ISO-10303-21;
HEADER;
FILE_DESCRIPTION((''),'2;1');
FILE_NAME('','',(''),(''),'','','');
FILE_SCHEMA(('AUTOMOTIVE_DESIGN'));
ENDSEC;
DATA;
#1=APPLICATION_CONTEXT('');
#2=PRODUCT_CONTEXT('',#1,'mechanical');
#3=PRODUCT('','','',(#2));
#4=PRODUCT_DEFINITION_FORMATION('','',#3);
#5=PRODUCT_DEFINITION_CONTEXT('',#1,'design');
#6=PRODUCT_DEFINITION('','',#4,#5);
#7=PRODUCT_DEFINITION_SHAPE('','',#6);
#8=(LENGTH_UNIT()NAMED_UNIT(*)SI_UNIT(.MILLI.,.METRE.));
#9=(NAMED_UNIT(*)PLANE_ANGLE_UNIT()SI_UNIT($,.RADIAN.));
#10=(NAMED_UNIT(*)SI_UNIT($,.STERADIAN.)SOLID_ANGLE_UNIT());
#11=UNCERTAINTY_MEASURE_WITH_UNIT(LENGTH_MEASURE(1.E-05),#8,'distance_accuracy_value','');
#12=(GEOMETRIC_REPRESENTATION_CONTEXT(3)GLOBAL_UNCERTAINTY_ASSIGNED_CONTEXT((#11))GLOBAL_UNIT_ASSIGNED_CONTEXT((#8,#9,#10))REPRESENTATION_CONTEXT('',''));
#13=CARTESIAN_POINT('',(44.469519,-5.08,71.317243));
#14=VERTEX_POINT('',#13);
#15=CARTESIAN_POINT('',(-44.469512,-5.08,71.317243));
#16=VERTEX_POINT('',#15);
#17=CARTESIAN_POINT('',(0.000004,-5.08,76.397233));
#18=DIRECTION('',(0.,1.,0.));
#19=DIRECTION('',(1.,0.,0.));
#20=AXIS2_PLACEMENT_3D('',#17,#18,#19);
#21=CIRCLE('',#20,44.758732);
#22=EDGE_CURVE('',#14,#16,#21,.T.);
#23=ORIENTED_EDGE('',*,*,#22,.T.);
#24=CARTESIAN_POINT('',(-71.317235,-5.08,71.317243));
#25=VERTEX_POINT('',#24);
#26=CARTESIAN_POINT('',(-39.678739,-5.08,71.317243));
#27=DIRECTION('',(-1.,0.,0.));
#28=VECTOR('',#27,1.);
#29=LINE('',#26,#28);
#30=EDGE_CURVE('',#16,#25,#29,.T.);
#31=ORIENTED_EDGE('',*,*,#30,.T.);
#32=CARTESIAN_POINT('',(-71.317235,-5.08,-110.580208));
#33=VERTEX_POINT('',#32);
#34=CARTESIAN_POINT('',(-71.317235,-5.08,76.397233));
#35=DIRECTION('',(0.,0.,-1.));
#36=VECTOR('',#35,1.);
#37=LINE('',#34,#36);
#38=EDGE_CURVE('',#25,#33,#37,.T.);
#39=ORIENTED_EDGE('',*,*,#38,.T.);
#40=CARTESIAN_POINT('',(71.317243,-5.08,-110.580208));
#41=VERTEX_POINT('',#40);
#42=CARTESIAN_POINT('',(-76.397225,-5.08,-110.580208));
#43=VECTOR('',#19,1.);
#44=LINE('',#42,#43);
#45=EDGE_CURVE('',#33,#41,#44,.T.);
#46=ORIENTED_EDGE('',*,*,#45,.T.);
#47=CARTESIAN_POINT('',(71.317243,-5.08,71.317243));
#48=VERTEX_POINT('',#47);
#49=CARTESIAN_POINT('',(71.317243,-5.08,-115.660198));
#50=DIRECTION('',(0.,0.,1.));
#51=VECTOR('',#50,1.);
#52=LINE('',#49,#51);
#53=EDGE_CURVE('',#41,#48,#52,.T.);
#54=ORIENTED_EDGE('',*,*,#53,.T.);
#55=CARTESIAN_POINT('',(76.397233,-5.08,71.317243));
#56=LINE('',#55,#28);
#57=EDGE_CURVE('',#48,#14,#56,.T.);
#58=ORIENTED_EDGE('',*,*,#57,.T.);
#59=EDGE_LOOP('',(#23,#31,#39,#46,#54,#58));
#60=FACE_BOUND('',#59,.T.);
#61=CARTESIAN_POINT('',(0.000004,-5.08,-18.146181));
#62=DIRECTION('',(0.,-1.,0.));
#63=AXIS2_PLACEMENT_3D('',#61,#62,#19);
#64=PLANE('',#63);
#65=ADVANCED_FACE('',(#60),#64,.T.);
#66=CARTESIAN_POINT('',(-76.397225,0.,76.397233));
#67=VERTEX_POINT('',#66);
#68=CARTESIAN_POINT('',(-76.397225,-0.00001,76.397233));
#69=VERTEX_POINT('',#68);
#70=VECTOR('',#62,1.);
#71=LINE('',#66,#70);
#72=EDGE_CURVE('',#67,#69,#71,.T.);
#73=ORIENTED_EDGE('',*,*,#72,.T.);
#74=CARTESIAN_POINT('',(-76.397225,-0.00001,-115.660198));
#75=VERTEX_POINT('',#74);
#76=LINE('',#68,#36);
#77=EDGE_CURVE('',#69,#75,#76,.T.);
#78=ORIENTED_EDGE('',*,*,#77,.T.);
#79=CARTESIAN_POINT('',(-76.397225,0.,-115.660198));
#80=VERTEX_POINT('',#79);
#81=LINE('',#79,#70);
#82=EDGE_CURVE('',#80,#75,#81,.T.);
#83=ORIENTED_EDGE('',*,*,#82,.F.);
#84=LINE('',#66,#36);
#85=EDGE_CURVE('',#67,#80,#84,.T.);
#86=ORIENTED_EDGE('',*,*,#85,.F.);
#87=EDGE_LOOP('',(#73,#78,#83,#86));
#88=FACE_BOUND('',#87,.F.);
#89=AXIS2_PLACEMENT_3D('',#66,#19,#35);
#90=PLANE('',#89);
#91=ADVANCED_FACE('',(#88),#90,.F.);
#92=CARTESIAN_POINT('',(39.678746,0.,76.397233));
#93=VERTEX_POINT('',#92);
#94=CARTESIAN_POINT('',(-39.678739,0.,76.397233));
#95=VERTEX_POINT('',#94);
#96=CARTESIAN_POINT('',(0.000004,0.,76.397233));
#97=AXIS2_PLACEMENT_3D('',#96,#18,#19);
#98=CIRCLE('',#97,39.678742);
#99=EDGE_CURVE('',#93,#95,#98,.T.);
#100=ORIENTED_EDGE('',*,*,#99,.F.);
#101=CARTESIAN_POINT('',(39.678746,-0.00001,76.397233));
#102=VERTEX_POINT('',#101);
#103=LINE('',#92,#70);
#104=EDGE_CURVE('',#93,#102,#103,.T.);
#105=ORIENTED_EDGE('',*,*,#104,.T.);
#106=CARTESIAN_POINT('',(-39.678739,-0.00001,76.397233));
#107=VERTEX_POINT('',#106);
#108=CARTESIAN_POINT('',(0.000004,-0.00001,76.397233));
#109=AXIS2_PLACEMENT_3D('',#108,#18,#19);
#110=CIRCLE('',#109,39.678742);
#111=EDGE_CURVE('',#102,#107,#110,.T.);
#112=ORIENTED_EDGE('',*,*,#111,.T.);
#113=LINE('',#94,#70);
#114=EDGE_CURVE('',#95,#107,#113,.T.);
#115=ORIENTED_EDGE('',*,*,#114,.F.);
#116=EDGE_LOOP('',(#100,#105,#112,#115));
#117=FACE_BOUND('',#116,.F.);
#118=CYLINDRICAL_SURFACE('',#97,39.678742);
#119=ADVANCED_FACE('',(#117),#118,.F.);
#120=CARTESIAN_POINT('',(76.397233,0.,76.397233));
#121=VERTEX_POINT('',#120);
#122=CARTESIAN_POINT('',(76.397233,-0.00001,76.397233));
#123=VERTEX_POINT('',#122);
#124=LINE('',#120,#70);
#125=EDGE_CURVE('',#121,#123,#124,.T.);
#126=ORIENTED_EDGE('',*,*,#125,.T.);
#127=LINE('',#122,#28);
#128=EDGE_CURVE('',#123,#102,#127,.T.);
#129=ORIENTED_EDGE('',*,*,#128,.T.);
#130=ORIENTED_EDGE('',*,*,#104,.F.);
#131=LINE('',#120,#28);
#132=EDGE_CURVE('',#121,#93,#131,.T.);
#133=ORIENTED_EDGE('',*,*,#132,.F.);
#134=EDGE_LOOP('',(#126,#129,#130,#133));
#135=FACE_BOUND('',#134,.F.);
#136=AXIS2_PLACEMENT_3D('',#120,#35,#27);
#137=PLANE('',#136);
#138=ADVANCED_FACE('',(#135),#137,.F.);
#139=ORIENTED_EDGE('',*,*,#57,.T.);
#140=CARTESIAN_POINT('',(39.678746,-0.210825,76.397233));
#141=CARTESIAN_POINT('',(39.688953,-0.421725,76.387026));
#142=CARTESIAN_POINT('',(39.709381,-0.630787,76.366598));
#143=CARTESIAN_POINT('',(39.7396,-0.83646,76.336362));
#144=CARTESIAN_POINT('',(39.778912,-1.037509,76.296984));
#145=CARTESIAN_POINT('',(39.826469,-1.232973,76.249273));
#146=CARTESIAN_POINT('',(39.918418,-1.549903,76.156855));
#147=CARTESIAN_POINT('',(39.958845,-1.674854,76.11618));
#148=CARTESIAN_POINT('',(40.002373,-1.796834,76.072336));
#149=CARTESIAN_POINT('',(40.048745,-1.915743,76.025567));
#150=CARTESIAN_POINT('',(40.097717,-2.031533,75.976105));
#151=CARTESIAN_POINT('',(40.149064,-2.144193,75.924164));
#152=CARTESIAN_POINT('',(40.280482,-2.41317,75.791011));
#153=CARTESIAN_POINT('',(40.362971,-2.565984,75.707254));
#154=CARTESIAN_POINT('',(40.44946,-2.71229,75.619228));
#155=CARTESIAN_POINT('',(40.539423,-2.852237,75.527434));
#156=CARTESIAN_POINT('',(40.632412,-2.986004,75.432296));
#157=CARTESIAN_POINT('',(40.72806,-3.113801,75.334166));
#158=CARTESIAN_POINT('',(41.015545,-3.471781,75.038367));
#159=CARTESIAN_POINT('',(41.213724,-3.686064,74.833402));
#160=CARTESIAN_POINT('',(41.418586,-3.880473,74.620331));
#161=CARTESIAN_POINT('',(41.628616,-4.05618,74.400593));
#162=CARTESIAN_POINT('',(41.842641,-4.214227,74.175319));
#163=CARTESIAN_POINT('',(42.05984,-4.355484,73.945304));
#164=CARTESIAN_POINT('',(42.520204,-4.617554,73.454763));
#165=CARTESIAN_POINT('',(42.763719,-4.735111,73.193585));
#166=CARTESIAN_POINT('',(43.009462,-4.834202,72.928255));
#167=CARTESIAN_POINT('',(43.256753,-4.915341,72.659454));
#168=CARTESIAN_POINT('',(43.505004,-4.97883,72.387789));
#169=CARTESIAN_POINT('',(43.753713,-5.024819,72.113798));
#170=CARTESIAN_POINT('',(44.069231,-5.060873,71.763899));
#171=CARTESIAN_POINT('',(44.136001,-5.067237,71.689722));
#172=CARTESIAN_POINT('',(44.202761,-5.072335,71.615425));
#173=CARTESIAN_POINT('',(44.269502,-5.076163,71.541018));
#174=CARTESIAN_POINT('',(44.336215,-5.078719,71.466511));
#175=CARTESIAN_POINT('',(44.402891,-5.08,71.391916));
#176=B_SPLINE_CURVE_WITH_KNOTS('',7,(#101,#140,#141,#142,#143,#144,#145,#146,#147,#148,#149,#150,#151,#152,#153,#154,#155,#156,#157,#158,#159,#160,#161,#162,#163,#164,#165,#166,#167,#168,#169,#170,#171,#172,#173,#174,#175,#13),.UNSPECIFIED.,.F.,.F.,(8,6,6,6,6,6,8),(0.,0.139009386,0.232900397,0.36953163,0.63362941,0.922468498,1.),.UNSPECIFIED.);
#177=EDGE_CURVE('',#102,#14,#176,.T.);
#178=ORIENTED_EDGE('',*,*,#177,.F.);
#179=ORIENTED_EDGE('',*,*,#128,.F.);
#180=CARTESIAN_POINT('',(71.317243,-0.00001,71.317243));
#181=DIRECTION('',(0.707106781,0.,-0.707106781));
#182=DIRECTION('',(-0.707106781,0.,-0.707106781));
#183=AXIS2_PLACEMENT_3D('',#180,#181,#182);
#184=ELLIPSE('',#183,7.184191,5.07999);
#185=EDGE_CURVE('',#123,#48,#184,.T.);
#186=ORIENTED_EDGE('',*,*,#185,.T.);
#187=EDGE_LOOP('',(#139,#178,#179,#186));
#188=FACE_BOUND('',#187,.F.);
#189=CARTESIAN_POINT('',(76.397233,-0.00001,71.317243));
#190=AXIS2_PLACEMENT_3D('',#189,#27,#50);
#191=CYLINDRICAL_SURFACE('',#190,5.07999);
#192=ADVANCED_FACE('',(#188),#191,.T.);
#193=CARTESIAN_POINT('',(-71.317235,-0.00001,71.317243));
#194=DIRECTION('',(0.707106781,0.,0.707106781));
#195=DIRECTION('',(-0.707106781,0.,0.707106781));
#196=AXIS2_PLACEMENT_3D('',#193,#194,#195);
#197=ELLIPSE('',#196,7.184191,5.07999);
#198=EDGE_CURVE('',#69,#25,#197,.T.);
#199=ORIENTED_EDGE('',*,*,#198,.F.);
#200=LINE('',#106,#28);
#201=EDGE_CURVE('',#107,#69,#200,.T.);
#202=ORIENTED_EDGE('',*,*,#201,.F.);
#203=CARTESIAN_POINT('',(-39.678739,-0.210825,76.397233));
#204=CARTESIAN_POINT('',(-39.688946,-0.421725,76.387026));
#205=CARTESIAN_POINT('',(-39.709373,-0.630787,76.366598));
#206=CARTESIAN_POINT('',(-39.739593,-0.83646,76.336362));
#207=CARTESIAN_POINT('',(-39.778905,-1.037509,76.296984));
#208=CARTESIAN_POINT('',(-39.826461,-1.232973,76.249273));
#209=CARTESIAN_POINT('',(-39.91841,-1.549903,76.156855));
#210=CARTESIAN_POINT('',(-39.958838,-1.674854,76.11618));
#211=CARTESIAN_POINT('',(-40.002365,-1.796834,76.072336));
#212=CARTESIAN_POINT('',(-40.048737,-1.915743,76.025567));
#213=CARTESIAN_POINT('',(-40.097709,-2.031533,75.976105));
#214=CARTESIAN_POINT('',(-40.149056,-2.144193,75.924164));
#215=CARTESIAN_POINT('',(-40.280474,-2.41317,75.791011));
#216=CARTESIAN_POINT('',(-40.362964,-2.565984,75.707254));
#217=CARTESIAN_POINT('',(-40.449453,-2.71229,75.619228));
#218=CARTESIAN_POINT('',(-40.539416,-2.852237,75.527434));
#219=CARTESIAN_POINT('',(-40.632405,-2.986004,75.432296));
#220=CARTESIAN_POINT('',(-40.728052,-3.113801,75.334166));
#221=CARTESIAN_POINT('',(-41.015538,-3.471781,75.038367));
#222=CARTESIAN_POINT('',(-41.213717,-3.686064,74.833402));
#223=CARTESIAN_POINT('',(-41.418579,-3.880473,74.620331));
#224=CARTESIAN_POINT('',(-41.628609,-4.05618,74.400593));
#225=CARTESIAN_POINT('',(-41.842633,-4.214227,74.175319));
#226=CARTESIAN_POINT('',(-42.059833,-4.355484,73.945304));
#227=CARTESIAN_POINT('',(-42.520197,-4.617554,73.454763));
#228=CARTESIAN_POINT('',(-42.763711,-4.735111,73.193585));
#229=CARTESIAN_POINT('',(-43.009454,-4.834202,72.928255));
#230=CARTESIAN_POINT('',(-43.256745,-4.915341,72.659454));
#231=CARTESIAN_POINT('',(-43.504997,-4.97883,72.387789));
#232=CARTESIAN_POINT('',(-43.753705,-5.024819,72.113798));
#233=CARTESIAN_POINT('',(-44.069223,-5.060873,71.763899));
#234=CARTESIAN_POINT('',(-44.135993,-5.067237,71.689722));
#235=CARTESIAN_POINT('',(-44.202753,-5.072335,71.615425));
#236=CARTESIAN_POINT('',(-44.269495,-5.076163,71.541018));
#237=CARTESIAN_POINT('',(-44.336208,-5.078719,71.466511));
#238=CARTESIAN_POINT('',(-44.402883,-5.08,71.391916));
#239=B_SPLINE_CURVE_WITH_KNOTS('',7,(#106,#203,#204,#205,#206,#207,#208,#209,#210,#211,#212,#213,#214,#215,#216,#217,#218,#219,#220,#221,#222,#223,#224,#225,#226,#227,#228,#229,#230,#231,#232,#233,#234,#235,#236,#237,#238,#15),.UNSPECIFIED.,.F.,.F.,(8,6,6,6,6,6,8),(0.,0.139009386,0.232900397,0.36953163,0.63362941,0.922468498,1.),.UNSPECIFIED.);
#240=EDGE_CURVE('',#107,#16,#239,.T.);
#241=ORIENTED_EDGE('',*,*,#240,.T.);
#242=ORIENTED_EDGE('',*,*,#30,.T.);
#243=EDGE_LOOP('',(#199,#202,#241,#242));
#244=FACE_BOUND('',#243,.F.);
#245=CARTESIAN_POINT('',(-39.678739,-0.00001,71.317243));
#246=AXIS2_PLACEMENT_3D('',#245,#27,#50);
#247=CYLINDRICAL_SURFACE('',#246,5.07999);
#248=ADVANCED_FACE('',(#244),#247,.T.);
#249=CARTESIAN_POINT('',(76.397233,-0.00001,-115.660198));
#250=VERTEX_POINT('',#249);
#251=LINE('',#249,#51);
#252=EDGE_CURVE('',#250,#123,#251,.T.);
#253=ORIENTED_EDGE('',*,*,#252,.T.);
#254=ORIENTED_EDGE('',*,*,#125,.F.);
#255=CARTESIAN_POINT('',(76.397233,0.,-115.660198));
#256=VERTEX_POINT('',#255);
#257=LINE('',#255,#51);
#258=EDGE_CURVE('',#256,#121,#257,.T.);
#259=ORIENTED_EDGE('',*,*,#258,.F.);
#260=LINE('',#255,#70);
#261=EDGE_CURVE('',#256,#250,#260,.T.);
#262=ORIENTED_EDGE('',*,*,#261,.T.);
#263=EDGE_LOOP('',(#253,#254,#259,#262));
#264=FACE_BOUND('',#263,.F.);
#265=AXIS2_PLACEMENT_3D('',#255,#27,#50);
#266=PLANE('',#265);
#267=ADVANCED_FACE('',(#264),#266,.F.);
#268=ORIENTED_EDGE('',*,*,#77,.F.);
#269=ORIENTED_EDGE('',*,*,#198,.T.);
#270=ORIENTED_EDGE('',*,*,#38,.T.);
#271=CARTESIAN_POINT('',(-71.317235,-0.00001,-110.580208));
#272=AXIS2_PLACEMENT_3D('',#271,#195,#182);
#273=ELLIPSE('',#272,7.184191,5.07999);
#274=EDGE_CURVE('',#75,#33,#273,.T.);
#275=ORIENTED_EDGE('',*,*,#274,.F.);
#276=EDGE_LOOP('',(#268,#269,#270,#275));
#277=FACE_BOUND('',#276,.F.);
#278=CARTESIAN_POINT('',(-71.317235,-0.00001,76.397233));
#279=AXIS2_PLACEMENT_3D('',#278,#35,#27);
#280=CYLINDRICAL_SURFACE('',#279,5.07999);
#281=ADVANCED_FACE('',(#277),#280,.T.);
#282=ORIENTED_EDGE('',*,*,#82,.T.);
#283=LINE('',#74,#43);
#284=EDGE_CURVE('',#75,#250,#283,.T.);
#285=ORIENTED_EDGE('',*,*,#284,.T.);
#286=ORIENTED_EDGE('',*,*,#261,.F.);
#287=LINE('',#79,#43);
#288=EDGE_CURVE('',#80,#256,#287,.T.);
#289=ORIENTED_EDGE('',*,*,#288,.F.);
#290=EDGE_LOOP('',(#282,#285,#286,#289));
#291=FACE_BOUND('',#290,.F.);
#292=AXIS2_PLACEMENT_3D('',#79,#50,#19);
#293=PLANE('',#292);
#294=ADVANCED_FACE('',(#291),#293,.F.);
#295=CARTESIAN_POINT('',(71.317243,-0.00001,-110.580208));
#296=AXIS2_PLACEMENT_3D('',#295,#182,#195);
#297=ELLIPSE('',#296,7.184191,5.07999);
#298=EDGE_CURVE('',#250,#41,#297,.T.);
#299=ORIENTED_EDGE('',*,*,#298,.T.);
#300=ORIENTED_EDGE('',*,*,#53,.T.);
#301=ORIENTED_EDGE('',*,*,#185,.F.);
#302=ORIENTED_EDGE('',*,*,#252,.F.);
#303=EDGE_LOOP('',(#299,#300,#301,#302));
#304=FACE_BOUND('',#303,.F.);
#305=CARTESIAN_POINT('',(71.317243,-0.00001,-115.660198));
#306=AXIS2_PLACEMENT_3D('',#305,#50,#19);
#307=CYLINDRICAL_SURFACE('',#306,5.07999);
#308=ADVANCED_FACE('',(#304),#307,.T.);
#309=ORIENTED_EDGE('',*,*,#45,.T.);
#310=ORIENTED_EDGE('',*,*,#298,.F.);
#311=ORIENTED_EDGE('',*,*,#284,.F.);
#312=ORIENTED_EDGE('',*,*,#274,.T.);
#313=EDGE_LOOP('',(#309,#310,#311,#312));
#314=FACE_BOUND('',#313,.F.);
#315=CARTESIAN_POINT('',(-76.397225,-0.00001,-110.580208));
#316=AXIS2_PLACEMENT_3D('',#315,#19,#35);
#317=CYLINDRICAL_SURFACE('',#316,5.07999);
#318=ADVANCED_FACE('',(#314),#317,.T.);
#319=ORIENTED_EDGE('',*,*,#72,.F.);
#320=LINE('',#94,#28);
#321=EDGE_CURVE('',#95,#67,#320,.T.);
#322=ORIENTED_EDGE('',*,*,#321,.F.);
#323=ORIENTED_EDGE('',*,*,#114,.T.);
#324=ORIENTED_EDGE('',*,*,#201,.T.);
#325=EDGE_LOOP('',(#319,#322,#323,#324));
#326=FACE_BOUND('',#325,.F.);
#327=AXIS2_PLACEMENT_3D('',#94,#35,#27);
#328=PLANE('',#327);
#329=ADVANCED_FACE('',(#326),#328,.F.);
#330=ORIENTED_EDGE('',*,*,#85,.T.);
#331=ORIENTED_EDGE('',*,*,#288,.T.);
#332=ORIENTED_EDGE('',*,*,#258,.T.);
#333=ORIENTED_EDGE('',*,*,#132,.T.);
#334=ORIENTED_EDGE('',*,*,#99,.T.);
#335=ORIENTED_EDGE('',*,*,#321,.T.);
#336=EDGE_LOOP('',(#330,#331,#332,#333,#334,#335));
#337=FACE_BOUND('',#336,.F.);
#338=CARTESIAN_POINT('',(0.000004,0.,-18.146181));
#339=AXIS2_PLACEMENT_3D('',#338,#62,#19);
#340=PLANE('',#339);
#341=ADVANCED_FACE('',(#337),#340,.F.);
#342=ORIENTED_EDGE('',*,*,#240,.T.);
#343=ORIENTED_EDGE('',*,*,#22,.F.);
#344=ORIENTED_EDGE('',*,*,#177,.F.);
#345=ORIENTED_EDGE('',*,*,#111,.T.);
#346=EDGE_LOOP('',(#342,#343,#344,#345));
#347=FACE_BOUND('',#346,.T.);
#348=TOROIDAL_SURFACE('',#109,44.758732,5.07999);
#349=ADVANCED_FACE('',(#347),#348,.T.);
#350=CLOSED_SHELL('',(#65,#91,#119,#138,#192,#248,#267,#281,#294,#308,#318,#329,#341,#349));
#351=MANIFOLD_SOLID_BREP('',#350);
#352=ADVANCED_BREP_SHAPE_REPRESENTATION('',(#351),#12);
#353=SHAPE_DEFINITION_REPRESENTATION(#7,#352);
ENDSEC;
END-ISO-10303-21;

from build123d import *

# Parameters (mm, degrees)
F1_DEPTH = 5.08
F2_R     = 5.07999


# Not quite as in the source:
# - a fillet or chamfer is up to 0.001 mm smaller than in the source, because OpenCascade refuses the exact size


with BuildPart() as f1:
    # F0 (on Front) → F1 (new body)
    with BuildSketch(Plane.XZ):
        with BuildLine():
            Line((76.3972327113, 76.3972327113), (39.6787461365, 76.3972327113))
            ThreePointArc((39.6787461365, 76.3972327113), (3.7253e-06, 36.7184903001), (-39.678738686, 76.3972327113))
            Line((-39.678738686, 76.3972327113), (-76.3972252607, 76.3972327113))
            Line((-76.3972252607, 76.3972327113), (-76.3972252607, -115.6601980329))
            Line((-76.3972252607, -115.6601980329), (76.3972327113, -115.6601980329))
            Line((76.3972327113, -115.6601980329), (76.3972327113, 76.3972327113))
        make_face()
    extrude(amount=F1_DEPTH)

    # F2 (radius 5.08 in the source; OpenCascade refuses exactly that, so slightly less here)
    f2_edges = [f1.edges().sort_by_distance(p)[0] for p in [
        (-58.037982, -5.08, 76.397233),
        (-76.397225, -5.08, -19.631483),
        (4e-06, -5.08, 36.71849),
        (58.037989, -5.08, 76.397233),
        (76.397233, -5.08, -19.631483),
        (4e-06, -5.08, -115.660198),
    ]]
    fillet(f2_edges, radius=F2_R)


solid = f1.part
